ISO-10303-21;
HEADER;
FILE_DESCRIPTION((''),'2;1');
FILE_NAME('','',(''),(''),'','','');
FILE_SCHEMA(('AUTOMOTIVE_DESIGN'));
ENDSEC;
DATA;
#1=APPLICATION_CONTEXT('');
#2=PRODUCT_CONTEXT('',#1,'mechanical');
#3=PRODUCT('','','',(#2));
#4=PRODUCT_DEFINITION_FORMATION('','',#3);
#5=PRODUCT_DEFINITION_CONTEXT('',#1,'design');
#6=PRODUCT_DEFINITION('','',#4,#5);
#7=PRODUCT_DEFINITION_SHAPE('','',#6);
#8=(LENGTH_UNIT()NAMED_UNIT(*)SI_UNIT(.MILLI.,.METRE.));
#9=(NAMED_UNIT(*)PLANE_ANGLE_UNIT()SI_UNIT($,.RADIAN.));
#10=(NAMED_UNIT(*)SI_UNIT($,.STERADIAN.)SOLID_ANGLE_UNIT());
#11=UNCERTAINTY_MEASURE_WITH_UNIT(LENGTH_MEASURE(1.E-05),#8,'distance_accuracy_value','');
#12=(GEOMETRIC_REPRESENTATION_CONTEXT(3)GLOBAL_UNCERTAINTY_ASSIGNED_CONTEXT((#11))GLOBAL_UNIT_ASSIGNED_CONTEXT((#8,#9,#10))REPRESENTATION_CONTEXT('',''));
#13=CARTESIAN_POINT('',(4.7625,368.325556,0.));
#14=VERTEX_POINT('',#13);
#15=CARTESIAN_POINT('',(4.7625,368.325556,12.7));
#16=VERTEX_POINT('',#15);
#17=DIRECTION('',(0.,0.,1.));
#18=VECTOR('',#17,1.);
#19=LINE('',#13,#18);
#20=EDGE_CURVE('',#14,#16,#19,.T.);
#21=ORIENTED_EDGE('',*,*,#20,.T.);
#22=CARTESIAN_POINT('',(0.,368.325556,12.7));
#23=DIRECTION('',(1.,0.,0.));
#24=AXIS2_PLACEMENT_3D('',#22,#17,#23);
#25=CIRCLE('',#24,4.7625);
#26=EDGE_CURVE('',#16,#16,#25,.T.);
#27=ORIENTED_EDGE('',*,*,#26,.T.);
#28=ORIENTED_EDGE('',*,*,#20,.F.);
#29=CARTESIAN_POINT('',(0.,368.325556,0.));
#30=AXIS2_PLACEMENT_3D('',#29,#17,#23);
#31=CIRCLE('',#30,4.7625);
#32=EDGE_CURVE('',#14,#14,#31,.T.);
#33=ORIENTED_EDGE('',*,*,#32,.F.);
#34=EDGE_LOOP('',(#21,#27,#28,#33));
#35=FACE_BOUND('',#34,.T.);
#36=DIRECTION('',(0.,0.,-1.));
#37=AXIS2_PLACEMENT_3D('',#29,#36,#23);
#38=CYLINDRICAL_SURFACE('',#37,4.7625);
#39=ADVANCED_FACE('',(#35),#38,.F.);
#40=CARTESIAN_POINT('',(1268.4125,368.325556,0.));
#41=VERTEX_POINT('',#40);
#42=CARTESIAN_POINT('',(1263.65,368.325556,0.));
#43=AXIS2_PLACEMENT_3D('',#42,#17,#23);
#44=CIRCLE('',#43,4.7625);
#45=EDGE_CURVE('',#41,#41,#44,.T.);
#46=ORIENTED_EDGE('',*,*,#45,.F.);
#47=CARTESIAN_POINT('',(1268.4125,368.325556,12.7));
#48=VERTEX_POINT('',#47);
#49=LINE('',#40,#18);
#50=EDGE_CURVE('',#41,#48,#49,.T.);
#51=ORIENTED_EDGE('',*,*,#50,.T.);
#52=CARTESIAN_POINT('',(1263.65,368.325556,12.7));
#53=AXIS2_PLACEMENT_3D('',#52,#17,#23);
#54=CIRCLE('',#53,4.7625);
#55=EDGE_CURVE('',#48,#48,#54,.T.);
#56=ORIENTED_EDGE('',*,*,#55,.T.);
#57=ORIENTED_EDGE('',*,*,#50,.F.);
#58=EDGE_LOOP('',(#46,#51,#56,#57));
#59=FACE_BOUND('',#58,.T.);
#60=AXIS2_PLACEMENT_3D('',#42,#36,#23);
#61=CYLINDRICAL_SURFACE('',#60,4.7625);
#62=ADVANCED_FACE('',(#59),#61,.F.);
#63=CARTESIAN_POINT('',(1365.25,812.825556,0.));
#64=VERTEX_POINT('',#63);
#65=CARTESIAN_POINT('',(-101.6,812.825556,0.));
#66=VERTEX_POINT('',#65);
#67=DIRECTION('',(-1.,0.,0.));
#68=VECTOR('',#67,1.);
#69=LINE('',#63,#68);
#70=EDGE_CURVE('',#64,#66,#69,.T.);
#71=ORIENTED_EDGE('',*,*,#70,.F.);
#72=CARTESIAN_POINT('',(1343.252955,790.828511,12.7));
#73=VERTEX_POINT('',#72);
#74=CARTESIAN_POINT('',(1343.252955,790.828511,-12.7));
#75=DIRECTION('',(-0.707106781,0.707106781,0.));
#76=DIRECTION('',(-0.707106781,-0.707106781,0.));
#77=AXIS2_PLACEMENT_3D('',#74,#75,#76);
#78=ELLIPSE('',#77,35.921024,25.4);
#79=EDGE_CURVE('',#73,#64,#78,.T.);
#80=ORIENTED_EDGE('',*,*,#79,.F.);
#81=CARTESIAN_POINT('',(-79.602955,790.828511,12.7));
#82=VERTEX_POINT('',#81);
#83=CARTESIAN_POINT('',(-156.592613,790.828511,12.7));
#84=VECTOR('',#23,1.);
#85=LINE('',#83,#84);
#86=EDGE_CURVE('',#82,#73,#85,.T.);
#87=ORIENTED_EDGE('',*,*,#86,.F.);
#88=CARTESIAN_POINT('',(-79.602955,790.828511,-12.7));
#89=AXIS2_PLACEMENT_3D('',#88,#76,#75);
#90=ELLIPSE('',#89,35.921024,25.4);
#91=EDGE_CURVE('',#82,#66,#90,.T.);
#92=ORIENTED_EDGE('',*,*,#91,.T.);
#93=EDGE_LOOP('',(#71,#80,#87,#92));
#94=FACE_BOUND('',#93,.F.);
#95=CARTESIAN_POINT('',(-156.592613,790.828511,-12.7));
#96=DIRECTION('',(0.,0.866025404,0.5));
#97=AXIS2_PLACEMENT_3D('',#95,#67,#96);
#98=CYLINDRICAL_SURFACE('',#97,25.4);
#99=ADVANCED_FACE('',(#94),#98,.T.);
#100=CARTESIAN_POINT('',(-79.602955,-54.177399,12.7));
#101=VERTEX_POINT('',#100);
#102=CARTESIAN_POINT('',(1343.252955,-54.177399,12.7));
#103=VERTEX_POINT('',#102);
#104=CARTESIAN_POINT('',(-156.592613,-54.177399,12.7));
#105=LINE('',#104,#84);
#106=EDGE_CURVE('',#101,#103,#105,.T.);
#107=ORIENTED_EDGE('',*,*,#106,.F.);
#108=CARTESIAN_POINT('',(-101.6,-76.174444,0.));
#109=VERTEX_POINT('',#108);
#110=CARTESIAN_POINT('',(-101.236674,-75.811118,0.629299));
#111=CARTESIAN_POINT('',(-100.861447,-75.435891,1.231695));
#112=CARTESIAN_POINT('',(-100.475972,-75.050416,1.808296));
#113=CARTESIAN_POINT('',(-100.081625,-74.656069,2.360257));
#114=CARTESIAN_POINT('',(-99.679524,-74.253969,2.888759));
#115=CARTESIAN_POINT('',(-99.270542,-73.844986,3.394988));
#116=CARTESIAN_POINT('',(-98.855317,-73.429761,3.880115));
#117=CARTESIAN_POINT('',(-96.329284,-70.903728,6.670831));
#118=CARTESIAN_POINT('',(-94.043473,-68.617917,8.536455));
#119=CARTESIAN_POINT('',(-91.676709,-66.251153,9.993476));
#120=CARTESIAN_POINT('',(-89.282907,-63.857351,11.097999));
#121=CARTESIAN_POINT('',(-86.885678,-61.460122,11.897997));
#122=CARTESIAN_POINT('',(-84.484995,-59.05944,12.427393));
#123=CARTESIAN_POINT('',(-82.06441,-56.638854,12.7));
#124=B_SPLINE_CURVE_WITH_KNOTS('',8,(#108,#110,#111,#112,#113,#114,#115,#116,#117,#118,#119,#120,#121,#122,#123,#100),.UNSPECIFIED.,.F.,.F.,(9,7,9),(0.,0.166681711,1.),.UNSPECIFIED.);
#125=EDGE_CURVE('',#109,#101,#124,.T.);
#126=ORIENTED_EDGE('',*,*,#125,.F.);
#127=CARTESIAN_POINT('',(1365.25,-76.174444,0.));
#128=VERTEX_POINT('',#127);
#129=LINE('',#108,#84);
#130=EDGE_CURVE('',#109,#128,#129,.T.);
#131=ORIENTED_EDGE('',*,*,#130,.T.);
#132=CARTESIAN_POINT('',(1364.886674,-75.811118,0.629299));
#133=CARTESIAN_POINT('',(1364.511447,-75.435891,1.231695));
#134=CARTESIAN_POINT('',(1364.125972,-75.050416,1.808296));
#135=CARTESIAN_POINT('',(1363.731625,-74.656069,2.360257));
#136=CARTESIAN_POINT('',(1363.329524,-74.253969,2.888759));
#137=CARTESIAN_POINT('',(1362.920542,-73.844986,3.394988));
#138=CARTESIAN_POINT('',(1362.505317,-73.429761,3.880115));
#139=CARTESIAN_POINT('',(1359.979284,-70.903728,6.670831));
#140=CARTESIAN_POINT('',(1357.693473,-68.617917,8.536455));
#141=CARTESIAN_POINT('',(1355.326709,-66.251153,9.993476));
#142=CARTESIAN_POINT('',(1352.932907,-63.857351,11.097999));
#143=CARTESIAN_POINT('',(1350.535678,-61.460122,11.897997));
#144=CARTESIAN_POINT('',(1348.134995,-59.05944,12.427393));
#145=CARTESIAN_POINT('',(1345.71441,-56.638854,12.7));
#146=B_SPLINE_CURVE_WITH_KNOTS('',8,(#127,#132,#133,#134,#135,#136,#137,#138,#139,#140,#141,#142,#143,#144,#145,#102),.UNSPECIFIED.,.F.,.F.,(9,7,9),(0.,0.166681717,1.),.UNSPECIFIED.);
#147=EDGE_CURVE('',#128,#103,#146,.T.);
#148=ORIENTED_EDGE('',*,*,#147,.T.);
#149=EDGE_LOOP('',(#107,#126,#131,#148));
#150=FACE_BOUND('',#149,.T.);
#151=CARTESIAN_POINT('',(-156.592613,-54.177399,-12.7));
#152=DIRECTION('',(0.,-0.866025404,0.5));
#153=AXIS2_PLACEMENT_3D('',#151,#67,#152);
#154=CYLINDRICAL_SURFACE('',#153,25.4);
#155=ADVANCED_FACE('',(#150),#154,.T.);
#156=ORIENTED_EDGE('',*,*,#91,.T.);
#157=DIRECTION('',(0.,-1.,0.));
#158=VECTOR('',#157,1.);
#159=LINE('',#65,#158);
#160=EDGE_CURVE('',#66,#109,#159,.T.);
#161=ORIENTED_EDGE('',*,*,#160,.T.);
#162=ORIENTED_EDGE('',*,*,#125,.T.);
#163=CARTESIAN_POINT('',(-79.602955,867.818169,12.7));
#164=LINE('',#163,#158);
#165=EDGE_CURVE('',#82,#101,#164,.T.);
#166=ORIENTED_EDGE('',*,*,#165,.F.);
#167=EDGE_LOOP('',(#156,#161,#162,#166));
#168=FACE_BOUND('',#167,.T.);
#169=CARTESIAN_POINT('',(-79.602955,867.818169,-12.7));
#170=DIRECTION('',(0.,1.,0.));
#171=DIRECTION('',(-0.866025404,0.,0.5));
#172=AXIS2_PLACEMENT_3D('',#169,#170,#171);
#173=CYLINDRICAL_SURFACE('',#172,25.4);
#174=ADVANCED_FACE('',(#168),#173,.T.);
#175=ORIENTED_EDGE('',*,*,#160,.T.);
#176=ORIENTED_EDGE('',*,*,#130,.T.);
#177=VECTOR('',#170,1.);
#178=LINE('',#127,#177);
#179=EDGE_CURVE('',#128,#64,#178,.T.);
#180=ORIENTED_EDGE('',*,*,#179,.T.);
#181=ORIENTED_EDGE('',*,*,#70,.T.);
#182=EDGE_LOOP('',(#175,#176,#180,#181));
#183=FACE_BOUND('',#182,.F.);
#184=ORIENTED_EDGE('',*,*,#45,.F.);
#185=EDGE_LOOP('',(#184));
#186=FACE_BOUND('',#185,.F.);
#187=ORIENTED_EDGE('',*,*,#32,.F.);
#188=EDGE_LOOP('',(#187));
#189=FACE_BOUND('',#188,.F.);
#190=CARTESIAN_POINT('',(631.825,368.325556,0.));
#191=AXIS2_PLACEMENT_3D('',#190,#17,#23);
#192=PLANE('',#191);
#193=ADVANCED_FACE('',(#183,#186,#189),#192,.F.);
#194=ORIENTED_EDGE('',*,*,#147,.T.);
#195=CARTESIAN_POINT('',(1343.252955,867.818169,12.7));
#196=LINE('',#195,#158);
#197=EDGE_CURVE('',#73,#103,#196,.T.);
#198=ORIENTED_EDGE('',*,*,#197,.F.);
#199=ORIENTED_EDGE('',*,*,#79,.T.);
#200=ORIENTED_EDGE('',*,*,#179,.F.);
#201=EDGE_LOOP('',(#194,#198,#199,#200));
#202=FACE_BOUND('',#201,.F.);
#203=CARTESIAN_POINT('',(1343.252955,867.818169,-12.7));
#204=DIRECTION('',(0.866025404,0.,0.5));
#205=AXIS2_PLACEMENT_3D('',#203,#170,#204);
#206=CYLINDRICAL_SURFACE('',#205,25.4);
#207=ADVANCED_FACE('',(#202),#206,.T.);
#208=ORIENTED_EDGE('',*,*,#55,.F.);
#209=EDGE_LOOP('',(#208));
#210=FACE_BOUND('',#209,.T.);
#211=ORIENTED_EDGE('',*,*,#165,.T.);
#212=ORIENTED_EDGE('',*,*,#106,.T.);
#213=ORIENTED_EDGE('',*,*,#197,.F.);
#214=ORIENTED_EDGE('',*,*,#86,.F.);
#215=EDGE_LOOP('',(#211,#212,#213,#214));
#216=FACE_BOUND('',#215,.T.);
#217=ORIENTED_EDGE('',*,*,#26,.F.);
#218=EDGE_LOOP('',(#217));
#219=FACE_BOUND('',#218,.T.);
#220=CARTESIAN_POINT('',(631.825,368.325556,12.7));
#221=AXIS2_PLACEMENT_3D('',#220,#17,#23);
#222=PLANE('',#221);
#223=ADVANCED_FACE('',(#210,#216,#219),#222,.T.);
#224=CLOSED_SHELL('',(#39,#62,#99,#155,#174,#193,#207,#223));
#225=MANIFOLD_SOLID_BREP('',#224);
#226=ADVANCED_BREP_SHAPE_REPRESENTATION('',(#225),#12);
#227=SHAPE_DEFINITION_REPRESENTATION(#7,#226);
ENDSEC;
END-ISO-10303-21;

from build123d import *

# Parameters (mm, degrees)
F0_W        = 1416.05
F0_H        = 838.2
F0_R        = 4.7625
F1_DEPTH    = 12.7
F2_T1_DEPTH = 1576.8352262806
F2_T3_DEPTH = 998.9852262806


# Not quite as in the source:
# - a fillet or chamfer that OpenCascade refuses, or shapes differently, is made with other operations: its cross-section is extruded or revolved along the edge and cut away or added
# - a feature names something its author has since deleted; it is built from what else it names


with BuildPart() as f1:
    # F0 (on Top) → F1 (new body)
    with BuildSketch(Plane.XY):
        Polygon((-101.6, 812.8255558279), (-101.6, -76.1744441721), (1365.25, -76.1744441721), (1365.25, 736.6255558279), (1365.25, 812.8255558279), align=None)
        with Locations((631.825, 368.3255558279)):
            Rectangle(F0_W, F0_H, mode=Mode.SUBTRACT)
        with Locations((631.825, 368.3255558279)):
            Rectangle(F0_W, F0_H)
        with Locations((0, 368.3255558279)):
            Circle(F0_R, mode=Mode.SUBTRACT)
        with Locations((1263.65, 368.3255558279)):
            Circle(F0_R, mode=Mode.SUBTRACT)
    extrude(amount=F1_DEPTH)

    # F2: fillet of radius 25.4 on 4 edges, made by hand

    # F2_s2 → F2_t1 (cut)
    with BuildSketch(Plane.YZ.offset(-156.5926131403)):
        with BuildLine():
            ThreePointArc((-76.1744441721, 0), (-66.8773989159, 9.2970452561), (-54.1773989159, 12.7))
            Line((-54.1773989159, 12.7), (-76.1744441721, 12.7))
            Line((-76.1744441721, 12.7), (-76.1744441721, 0))
        make_face()
        with BuildLine():
            ThreePointArc((812.8255558279, 0), (803.5285105718, 9.2970452561), (790.8285105718, 12.7))
            Line((790.8285105718, 12.7), (812.8255558279, 12.7))
            Line((812.8255558279, 12.7), (812.8255558279, 0))
        make_face()
    extrude(amount=F2_T1_DEPTH, mode=Mode.SUBTRACT)

    # F2_s4 → F2_t3 (cut)
    with BuildSketch(Plane.XZ.offset(-867.8181689683)):
        with BuildLine():
            ThreePointArc((-101.6, 0), (-92.3029547439, 9.2970452561), (-79.6029547439, 12.7))
            Line((-79.6029547439, 12.7), (-101.6, 12.7))
            Line((-101.6, 12.7), (-101.6, 0))
        make_face()
        with BuildLine():
            ThreePointArc((1365.25, 0), (1355.9529547439, 9.2970452561), (1343.2529547439, 12.7))
            Line((1343.2529547439, 12.7), (1365.25, 12.7))
            Line((1365.25, 12.7), (1365.25, 0))
        make_face()
    extrude(amount=F2_T3_DEPTH, mode=Mode.SUBTRACT)


solid = f1.part
